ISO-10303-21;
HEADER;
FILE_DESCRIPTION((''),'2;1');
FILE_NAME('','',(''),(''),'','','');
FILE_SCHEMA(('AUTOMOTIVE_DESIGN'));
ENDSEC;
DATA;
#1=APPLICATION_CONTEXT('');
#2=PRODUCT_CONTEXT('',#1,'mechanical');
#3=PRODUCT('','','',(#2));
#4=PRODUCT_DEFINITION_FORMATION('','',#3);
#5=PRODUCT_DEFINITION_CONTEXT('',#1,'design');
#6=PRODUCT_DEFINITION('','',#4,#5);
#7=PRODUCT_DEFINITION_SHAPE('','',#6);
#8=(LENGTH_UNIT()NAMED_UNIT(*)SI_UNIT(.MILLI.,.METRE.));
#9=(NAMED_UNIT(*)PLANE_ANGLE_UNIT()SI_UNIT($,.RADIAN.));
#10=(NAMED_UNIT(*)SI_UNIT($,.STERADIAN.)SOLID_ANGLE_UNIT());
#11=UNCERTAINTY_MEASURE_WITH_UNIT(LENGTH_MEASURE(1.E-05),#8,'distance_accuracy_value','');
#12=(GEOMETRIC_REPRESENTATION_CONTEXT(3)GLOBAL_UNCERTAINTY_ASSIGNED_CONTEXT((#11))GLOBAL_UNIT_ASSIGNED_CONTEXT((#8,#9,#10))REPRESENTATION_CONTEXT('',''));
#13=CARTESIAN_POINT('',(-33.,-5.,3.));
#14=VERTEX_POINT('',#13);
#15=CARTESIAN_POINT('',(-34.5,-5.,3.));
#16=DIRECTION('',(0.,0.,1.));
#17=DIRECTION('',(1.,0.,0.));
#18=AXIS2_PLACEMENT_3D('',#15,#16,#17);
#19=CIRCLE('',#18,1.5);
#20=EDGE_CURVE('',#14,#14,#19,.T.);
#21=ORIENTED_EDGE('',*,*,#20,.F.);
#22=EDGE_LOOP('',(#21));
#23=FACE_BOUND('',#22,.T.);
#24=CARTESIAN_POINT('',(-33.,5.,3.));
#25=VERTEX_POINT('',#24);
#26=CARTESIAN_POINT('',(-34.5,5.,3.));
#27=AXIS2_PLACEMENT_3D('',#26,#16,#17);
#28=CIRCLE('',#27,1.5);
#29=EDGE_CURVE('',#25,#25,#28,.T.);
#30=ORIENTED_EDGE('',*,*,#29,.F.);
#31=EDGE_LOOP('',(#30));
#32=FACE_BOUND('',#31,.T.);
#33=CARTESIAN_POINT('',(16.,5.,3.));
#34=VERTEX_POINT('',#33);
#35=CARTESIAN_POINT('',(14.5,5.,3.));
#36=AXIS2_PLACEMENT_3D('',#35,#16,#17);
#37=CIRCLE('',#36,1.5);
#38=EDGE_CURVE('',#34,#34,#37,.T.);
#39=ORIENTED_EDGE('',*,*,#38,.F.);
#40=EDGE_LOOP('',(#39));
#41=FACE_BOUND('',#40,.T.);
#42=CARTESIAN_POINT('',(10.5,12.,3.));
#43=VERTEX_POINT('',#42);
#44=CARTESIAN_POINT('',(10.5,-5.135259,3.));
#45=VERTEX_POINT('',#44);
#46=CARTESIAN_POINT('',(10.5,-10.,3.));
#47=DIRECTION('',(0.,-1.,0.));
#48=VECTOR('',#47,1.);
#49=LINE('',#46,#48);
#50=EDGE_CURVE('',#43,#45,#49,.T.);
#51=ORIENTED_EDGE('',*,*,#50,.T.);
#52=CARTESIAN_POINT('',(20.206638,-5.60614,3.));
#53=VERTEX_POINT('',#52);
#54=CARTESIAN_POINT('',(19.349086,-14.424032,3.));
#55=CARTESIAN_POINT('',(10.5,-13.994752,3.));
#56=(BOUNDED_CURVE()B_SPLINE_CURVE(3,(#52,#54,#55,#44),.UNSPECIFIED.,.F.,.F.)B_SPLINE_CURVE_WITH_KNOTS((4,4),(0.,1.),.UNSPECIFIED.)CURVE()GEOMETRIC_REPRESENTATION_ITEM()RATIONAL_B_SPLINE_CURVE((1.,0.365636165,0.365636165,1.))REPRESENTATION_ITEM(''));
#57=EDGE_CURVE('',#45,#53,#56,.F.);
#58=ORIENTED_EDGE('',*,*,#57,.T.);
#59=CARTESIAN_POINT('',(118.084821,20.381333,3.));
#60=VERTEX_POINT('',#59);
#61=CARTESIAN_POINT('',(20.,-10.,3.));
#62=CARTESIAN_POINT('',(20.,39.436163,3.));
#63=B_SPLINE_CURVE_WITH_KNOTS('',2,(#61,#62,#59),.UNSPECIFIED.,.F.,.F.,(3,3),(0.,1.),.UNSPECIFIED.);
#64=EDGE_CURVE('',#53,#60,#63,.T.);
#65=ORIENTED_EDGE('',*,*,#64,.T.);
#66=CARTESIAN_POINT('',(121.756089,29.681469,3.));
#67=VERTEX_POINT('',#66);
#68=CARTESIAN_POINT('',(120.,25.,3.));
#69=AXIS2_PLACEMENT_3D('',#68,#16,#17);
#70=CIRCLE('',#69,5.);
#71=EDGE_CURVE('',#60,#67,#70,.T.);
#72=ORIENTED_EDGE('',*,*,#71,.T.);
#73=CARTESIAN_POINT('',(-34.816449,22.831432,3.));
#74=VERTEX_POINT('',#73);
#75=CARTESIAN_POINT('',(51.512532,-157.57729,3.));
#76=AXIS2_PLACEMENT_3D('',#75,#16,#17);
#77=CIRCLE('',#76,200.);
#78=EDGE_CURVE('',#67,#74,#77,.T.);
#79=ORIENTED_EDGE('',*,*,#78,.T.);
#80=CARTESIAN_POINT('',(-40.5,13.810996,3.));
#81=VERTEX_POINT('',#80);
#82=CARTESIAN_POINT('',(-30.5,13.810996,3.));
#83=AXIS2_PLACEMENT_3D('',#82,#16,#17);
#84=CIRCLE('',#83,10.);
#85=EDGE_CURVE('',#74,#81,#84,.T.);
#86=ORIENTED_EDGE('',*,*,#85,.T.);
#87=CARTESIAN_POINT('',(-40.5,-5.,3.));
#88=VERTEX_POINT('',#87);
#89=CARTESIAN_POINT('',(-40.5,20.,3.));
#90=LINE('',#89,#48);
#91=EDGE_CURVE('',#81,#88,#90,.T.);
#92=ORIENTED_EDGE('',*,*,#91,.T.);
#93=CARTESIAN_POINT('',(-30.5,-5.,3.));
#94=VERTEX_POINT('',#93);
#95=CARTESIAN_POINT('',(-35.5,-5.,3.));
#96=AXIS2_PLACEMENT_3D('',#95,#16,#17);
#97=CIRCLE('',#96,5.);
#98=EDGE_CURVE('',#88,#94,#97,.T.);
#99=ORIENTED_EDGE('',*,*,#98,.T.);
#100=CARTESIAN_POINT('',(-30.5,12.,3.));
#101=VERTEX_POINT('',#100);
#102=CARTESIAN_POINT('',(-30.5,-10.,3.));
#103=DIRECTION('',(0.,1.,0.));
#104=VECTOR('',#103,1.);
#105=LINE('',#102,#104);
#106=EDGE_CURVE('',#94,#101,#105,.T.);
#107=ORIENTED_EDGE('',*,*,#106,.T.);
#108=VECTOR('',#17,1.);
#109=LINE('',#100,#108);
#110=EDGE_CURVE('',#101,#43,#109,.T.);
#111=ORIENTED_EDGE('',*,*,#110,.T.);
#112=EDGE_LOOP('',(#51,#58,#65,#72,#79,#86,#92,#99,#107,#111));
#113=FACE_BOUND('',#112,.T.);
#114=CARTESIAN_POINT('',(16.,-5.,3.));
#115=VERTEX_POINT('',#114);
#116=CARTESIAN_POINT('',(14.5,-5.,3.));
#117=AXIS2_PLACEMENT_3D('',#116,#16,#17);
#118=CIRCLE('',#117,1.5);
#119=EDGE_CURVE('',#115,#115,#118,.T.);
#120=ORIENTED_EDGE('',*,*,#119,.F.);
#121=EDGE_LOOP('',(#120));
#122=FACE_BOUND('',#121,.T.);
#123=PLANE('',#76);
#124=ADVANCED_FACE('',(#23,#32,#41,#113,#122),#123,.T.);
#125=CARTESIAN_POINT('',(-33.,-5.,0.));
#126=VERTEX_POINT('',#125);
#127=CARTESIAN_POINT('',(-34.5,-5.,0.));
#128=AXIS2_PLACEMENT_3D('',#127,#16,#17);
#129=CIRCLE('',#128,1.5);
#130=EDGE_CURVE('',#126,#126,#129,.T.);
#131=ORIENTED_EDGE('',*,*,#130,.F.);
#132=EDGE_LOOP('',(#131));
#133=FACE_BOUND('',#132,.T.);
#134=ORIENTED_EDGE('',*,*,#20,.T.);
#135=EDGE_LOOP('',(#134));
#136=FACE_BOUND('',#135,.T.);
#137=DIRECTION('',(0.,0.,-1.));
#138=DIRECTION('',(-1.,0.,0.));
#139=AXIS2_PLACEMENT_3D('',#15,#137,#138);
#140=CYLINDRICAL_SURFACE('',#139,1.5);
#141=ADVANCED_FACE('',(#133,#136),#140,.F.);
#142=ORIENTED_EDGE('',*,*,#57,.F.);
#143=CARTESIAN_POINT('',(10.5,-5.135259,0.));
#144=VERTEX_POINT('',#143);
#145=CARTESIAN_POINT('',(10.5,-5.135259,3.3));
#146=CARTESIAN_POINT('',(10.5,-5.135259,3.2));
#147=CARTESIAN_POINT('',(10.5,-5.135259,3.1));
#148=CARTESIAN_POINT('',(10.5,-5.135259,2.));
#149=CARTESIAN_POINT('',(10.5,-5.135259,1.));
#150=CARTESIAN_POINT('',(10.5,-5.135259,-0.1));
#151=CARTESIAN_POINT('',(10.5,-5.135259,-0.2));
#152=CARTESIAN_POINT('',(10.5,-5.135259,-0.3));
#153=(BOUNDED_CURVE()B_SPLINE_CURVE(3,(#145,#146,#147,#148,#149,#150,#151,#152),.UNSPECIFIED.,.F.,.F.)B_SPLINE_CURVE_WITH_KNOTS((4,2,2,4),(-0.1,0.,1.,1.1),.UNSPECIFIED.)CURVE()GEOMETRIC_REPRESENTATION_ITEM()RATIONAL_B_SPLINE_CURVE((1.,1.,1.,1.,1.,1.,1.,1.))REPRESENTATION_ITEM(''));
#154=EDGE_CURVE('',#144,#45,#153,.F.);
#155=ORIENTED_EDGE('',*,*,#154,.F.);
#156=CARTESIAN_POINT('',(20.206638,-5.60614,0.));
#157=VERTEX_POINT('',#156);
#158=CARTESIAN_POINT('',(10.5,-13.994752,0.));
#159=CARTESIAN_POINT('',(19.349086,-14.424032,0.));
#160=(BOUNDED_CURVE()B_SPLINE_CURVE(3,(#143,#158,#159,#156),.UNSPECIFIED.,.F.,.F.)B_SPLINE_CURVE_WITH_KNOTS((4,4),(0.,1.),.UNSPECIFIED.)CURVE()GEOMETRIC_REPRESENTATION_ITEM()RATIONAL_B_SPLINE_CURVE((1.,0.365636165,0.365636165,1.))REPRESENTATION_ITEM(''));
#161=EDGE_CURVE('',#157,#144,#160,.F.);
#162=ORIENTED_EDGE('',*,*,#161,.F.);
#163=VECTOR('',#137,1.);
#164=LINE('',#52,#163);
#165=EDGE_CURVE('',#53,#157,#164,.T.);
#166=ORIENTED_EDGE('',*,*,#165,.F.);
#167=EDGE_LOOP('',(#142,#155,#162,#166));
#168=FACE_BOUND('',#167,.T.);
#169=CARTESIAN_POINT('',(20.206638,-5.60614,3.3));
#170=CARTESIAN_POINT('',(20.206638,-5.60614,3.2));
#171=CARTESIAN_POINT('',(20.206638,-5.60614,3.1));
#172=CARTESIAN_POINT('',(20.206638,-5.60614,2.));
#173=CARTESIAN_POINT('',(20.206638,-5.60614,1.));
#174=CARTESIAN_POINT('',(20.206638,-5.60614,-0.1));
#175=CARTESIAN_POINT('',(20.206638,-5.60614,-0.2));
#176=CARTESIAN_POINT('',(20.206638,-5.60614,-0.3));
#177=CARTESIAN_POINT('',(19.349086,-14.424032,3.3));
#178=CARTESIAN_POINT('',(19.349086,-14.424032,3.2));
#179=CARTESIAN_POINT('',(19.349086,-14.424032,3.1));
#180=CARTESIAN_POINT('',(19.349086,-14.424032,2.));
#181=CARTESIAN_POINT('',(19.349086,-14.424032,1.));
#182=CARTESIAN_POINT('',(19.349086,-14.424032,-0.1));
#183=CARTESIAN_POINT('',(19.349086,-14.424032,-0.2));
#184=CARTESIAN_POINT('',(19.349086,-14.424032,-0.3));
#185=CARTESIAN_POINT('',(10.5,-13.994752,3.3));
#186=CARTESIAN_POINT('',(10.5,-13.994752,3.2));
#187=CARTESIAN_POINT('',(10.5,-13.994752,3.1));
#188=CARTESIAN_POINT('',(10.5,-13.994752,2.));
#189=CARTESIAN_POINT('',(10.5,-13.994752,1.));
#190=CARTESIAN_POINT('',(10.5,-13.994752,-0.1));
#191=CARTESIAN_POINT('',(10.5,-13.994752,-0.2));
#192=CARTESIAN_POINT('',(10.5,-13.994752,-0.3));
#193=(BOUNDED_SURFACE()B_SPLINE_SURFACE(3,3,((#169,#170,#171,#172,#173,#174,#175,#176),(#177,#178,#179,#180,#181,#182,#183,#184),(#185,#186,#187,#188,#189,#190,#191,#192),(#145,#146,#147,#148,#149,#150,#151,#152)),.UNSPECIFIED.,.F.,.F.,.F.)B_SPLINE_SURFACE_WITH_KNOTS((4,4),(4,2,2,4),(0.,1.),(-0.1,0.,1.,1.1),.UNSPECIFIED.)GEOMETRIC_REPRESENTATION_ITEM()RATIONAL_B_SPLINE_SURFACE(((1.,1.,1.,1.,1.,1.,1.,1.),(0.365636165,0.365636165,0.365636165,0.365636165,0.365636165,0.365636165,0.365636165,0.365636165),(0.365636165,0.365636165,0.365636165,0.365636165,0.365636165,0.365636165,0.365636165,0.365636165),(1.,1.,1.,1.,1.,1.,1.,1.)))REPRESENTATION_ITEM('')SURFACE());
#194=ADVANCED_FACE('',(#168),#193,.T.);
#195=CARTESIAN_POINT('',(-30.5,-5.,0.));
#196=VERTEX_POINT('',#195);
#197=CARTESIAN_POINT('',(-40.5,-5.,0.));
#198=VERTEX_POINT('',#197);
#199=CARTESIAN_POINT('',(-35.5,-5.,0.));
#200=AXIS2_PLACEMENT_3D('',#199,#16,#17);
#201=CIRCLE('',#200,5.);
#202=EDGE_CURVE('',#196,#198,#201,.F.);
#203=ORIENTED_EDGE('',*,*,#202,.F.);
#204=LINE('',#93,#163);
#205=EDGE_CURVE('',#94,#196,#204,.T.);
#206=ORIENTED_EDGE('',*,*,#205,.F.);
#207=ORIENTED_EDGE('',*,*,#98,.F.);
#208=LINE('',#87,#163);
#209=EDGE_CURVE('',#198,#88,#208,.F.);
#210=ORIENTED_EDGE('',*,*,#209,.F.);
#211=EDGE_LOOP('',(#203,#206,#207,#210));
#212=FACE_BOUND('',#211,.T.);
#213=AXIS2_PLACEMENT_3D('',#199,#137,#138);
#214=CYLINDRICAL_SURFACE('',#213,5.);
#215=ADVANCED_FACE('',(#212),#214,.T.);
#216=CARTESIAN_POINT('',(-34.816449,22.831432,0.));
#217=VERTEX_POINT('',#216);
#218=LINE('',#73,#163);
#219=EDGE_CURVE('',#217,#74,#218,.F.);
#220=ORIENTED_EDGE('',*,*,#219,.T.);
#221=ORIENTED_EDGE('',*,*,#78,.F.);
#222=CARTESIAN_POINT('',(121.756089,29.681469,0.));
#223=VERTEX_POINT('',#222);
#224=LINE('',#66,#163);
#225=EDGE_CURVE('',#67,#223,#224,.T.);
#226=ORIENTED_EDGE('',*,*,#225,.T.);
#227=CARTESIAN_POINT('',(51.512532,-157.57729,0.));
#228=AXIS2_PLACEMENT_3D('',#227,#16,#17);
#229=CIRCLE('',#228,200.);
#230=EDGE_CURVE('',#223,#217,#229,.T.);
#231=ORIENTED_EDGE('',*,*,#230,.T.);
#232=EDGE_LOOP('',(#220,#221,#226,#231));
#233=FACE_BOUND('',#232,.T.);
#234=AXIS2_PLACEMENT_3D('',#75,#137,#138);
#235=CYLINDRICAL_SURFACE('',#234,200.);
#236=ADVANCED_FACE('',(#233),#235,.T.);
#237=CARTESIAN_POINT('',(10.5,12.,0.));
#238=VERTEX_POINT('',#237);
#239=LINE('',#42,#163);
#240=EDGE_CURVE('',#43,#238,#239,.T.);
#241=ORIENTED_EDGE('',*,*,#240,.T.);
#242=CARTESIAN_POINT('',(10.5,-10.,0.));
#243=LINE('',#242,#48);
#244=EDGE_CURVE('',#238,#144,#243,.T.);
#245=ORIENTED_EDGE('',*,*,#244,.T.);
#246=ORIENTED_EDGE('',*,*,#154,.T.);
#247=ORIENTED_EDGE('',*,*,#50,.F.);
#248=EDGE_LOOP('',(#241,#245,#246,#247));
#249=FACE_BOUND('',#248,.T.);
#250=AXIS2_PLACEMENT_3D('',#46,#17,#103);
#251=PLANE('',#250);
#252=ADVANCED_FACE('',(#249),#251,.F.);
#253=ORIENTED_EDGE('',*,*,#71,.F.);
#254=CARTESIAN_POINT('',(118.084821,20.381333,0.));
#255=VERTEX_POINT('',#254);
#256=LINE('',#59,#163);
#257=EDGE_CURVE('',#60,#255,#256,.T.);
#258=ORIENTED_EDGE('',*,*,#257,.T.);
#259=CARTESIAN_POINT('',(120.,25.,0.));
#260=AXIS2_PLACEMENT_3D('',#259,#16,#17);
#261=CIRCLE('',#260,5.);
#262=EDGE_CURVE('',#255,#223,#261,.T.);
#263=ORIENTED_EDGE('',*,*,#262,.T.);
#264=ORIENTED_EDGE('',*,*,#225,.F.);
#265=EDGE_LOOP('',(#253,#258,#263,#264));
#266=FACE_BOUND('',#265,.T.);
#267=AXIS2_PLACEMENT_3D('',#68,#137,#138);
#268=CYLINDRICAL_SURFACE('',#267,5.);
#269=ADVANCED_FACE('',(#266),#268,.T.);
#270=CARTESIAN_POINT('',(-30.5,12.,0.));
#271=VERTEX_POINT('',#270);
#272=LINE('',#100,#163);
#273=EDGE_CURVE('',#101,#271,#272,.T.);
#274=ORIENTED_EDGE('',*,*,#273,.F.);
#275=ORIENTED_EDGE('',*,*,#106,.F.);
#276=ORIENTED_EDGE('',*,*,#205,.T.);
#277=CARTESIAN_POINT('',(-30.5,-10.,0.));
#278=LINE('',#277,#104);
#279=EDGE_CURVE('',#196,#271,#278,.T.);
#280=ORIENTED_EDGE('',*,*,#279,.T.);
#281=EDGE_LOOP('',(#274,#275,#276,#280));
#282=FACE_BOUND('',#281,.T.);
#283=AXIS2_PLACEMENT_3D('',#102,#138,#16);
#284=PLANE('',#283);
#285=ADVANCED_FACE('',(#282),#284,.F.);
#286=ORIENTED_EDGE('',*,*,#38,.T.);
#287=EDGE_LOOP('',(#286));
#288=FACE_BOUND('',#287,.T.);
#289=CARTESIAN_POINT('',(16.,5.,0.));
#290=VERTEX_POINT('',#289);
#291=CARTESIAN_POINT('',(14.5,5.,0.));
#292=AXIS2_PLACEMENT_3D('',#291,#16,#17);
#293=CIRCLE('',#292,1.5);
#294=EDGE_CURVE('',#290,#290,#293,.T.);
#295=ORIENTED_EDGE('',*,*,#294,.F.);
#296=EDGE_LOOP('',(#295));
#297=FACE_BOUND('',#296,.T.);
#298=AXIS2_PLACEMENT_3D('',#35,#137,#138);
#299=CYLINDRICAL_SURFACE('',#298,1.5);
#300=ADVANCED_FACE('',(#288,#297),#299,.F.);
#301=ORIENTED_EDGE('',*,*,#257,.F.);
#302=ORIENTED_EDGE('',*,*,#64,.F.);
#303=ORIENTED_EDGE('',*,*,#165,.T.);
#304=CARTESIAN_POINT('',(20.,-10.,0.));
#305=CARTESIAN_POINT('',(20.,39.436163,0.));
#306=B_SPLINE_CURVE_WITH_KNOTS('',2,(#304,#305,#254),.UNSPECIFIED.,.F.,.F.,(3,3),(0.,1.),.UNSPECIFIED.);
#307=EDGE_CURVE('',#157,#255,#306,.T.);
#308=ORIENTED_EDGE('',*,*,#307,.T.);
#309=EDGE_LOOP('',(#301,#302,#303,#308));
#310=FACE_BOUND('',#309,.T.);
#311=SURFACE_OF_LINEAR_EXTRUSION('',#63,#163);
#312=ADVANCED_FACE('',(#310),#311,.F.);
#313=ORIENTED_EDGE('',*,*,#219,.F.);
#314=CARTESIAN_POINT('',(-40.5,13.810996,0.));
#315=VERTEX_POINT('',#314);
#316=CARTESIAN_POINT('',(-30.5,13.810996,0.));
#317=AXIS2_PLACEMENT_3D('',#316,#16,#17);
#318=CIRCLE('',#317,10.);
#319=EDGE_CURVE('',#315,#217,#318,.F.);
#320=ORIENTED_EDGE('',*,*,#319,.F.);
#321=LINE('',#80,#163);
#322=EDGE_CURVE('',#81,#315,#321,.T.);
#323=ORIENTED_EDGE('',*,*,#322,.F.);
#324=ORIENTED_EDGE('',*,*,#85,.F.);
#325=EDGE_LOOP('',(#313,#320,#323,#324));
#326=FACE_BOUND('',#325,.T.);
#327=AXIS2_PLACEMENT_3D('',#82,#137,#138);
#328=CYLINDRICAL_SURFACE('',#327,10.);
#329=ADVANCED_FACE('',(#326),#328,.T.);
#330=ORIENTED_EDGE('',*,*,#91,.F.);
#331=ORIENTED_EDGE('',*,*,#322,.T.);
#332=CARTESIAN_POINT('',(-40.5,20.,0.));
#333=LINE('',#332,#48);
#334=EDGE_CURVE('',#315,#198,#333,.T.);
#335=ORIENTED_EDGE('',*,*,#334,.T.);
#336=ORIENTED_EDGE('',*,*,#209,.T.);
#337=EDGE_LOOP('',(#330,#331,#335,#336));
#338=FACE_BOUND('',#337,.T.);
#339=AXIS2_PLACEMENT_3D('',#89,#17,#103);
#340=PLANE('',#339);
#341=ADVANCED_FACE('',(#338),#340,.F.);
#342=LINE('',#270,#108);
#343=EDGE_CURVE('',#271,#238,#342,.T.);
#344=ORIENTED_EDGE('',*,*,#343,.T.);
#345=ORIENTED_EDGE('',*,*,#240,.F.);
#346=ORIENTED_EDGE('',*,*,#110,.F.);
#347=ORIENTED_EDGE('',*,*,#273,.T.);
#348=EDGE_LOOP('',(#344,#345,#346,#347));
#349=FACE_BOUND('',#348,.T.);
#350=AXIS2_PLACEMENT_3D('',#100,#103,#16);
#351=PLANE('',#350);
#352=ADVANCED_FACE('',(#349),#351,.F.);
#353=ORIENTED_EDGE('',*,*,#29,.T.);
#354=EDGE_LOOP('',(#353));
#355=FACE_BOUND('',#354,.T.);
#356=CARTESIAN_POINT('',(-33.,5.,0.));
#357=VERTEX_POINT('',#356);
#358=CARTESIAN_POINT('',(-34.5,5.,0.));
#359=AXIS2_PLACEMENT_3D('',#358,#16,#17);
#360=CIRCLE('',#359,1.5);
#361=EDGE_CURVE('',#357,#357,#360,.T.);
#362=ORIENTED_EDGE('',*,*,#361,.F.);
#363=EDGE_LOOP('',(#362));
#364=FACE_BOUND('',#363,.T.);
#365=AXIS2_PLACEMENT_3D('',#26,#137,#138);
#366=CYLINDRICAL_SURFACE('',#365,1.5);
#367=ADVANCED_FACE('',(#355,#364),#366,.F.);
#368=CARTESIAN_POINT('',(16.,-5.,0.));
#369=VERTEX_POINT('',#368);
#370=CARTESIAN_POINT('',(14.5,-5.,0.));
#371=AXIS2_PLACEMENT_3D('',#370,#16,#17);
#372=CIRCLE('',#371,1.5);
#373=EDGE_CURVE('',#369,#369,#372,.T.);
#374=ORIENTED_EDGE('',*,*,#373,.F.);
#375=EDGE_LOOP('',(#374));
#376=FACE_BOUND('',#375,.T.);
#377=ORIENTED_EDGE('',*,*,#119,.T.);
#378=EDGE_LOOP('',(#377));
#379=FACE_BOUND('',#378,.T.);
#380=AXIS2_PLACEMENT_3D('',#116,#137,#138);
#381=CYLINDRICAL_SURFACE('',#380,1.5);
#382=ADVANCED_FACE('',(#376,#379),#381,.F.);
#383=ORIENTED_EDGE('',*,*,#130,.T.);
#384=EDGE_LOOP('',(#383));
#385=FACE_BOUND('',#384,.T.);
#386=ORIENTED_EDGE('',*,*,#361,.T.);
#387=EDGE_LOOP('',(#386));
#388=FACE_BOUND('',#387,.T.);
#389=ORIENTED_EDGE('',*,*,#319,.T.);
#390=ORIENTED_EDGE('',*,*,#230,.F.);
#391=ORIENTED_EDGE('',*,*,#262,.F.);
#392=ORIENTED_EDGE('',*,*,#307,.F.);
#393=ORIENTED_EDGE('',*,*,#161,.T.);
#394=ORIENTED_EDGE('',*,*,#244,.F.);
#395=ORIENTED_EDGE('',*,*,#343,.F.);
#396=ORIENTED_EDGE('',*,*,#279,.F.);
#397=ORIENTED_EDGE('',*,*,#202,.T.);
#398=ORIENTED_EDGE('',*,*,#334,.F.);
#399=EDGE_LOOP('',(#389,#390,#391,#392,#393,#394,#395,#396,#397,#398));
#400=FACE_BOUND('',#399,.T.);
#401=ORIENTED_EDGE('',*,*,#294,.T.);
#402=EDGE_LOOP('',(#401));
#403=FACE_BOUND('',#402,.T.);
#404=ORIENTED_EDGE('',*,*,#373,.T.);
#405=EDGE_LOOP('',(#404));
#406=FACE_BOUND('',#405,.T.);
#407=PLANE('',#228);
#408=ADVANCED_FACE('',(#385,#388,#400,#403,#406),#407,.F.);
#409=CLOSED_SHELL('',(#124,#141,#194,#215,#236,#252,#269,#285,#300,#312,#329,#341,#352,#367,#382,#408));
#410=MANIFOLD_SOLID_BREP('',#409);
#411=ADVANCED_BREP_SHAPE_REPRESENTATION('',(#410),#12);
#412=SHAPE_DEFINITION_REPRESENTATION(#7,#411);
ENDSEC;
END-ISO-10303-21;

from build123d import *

# Parameters (mm, degrees)
SKETCH1_R           = 1.5
BOSS_EXTRUDE1_DEPTH = 3
FILLET1_R           = 10
FILLET2_START       = -1
FILLET2_DEPTH       = 5
FILLET3_RADIUS      = 5
FILLET3_LENGTH      = 3


with BuildPart() as part:
    # Sketch1 → Boss-Extrude1 (new body)
    with BuildSketch(Plane.XY):
        with BuildLine():
            Line((-40.5, 20), (-40.5, -10))
            Line((-40.5, -10), (-30.5, -10))
            Line((-30.5, -10), (-30.5, 12))
            Line((-30.5, 12), (10.5, 12))
            Line((10.5, 12), (10.5, -10))
            Line((10.5, -10), (20, -10))
            add(Edge.make_bspline(
                [(118.084820575, 20.381332685), (20, 39.436163422), (20, -10)],
                knots=[0, 0, 0, 1, 1, 1], degree=2))
            ThreePointArc((118.084820575, 20.381332685), (124.650748454, 23.164097275), (121.756088913, 29.681468971))
            ThreePointArc((121.756088913, 29.681468971), (39.600152782, 42.067632947), (-40.5, 20))
        make_face()
        with Locations((-34.5, -5)):
            Circle(SKETCH1_R, mode=Mode.SUBTRACT)
        with Locations((-34.5, 5)):
            Circle(SKETCH1_R, mode=Mode.SUBTRACT)
        with Locations((14.5, 5)):
            Circle(SKETCH1_R, mode=Mode.SUBTRACT)
        with Locations((14.5, -5)):
            Circle(SKETCH1_R, mode=Mode.SUBTRACT)
    extrude(amount=BOSS_EXTRUDE1_DEPTH)

    # Fillet1
    fillet1_edges = [part.edges().sort_by_distance(p)[0] for p in [
        (-40.5, 20, 1.5),
    ]]
    fillet(fillet1_edges, radius=FILLET1_R)

    # Fillet2: read off the stored shape, not the designer's step
    # Fillet2 outline → Fillet2 (cut)
    with BuildSketch(Plane.XY.offset(FILLET2_START)):
        with BuildLine():
            add(Edge.make_bspline(
                [(20, -10), (20, -7.730924257), (20.206638038, -5.606140409)],
                knots=[0, 0, 0, 0.045899107, 0.045899107, 0.045899107], degree=2))
            add(Edge.make_bspline(
                [(20.206638038, -5.606140409), (19.985493057, -7.880093874), (18.329539971, -9.999999869), (15.36474074, -10)],
                knots=[0, 0, 0, 0, 0.487277065, 0.487277065, 0.487277065, 0.487277065], degree=3, weights=[1, 0.690889052, 0.53240078, 0.524535183]))
            Line((15.36474074, -10), (20, -10))
        make_face()
        with BuildLine():
            Line((10.5, -10), (15.36474074, -10))
            add(Edge.make_bspline(
                [(15.36474074, -10), (12.147576418, -10.000000142), (10.5, -7.59675874), (10.5, -5.135259475)],
                knots=[0.487277065, 0.487277065, 0.487277065, 0.487277065, 1, 1, 1, 1], degree=3, weights=[0.524535183, 0.51625884, 0.674747113, 1]))
            Line((10.5, -5.135259475), (10.5, -10))
        make_face()
    extrude(amount=FILLET2_DEPTH, mode=Mode.SUBTRACT)

    # Fillet3: full round fillet: the end face becomes a half cylinder, R = half its width
    fillet3_face = Plane((-35.5, -10, 1.5), x_dir=(0, 0, 1), z_dir=(0, -1, 0))  # on the end face: x along it, z out of the body
    fillet3_slab = fillet3_face.offset(-FILLET3_RADIUS / 2) * Box(FILLET3_LENGTH, 2 * FILLET3_RADIUS, FILLET3_RADIUS, mode=Mode.PRIVATE)  # the body's end, R deep
    fillet3_round = Plane((-35.5, -5, 1.5), x_dir=(0, -1, 0), z_dir=(0, 0, 1)) * Cylinder(FILLET3_RADIUS, FILLET3_LENGTH, mode=Mode.PRIVATE)  # its axis R under the face
    add(fillet3_slab - fillet3_round, mode=Mode.SUBTRACT)


solid = part.part
